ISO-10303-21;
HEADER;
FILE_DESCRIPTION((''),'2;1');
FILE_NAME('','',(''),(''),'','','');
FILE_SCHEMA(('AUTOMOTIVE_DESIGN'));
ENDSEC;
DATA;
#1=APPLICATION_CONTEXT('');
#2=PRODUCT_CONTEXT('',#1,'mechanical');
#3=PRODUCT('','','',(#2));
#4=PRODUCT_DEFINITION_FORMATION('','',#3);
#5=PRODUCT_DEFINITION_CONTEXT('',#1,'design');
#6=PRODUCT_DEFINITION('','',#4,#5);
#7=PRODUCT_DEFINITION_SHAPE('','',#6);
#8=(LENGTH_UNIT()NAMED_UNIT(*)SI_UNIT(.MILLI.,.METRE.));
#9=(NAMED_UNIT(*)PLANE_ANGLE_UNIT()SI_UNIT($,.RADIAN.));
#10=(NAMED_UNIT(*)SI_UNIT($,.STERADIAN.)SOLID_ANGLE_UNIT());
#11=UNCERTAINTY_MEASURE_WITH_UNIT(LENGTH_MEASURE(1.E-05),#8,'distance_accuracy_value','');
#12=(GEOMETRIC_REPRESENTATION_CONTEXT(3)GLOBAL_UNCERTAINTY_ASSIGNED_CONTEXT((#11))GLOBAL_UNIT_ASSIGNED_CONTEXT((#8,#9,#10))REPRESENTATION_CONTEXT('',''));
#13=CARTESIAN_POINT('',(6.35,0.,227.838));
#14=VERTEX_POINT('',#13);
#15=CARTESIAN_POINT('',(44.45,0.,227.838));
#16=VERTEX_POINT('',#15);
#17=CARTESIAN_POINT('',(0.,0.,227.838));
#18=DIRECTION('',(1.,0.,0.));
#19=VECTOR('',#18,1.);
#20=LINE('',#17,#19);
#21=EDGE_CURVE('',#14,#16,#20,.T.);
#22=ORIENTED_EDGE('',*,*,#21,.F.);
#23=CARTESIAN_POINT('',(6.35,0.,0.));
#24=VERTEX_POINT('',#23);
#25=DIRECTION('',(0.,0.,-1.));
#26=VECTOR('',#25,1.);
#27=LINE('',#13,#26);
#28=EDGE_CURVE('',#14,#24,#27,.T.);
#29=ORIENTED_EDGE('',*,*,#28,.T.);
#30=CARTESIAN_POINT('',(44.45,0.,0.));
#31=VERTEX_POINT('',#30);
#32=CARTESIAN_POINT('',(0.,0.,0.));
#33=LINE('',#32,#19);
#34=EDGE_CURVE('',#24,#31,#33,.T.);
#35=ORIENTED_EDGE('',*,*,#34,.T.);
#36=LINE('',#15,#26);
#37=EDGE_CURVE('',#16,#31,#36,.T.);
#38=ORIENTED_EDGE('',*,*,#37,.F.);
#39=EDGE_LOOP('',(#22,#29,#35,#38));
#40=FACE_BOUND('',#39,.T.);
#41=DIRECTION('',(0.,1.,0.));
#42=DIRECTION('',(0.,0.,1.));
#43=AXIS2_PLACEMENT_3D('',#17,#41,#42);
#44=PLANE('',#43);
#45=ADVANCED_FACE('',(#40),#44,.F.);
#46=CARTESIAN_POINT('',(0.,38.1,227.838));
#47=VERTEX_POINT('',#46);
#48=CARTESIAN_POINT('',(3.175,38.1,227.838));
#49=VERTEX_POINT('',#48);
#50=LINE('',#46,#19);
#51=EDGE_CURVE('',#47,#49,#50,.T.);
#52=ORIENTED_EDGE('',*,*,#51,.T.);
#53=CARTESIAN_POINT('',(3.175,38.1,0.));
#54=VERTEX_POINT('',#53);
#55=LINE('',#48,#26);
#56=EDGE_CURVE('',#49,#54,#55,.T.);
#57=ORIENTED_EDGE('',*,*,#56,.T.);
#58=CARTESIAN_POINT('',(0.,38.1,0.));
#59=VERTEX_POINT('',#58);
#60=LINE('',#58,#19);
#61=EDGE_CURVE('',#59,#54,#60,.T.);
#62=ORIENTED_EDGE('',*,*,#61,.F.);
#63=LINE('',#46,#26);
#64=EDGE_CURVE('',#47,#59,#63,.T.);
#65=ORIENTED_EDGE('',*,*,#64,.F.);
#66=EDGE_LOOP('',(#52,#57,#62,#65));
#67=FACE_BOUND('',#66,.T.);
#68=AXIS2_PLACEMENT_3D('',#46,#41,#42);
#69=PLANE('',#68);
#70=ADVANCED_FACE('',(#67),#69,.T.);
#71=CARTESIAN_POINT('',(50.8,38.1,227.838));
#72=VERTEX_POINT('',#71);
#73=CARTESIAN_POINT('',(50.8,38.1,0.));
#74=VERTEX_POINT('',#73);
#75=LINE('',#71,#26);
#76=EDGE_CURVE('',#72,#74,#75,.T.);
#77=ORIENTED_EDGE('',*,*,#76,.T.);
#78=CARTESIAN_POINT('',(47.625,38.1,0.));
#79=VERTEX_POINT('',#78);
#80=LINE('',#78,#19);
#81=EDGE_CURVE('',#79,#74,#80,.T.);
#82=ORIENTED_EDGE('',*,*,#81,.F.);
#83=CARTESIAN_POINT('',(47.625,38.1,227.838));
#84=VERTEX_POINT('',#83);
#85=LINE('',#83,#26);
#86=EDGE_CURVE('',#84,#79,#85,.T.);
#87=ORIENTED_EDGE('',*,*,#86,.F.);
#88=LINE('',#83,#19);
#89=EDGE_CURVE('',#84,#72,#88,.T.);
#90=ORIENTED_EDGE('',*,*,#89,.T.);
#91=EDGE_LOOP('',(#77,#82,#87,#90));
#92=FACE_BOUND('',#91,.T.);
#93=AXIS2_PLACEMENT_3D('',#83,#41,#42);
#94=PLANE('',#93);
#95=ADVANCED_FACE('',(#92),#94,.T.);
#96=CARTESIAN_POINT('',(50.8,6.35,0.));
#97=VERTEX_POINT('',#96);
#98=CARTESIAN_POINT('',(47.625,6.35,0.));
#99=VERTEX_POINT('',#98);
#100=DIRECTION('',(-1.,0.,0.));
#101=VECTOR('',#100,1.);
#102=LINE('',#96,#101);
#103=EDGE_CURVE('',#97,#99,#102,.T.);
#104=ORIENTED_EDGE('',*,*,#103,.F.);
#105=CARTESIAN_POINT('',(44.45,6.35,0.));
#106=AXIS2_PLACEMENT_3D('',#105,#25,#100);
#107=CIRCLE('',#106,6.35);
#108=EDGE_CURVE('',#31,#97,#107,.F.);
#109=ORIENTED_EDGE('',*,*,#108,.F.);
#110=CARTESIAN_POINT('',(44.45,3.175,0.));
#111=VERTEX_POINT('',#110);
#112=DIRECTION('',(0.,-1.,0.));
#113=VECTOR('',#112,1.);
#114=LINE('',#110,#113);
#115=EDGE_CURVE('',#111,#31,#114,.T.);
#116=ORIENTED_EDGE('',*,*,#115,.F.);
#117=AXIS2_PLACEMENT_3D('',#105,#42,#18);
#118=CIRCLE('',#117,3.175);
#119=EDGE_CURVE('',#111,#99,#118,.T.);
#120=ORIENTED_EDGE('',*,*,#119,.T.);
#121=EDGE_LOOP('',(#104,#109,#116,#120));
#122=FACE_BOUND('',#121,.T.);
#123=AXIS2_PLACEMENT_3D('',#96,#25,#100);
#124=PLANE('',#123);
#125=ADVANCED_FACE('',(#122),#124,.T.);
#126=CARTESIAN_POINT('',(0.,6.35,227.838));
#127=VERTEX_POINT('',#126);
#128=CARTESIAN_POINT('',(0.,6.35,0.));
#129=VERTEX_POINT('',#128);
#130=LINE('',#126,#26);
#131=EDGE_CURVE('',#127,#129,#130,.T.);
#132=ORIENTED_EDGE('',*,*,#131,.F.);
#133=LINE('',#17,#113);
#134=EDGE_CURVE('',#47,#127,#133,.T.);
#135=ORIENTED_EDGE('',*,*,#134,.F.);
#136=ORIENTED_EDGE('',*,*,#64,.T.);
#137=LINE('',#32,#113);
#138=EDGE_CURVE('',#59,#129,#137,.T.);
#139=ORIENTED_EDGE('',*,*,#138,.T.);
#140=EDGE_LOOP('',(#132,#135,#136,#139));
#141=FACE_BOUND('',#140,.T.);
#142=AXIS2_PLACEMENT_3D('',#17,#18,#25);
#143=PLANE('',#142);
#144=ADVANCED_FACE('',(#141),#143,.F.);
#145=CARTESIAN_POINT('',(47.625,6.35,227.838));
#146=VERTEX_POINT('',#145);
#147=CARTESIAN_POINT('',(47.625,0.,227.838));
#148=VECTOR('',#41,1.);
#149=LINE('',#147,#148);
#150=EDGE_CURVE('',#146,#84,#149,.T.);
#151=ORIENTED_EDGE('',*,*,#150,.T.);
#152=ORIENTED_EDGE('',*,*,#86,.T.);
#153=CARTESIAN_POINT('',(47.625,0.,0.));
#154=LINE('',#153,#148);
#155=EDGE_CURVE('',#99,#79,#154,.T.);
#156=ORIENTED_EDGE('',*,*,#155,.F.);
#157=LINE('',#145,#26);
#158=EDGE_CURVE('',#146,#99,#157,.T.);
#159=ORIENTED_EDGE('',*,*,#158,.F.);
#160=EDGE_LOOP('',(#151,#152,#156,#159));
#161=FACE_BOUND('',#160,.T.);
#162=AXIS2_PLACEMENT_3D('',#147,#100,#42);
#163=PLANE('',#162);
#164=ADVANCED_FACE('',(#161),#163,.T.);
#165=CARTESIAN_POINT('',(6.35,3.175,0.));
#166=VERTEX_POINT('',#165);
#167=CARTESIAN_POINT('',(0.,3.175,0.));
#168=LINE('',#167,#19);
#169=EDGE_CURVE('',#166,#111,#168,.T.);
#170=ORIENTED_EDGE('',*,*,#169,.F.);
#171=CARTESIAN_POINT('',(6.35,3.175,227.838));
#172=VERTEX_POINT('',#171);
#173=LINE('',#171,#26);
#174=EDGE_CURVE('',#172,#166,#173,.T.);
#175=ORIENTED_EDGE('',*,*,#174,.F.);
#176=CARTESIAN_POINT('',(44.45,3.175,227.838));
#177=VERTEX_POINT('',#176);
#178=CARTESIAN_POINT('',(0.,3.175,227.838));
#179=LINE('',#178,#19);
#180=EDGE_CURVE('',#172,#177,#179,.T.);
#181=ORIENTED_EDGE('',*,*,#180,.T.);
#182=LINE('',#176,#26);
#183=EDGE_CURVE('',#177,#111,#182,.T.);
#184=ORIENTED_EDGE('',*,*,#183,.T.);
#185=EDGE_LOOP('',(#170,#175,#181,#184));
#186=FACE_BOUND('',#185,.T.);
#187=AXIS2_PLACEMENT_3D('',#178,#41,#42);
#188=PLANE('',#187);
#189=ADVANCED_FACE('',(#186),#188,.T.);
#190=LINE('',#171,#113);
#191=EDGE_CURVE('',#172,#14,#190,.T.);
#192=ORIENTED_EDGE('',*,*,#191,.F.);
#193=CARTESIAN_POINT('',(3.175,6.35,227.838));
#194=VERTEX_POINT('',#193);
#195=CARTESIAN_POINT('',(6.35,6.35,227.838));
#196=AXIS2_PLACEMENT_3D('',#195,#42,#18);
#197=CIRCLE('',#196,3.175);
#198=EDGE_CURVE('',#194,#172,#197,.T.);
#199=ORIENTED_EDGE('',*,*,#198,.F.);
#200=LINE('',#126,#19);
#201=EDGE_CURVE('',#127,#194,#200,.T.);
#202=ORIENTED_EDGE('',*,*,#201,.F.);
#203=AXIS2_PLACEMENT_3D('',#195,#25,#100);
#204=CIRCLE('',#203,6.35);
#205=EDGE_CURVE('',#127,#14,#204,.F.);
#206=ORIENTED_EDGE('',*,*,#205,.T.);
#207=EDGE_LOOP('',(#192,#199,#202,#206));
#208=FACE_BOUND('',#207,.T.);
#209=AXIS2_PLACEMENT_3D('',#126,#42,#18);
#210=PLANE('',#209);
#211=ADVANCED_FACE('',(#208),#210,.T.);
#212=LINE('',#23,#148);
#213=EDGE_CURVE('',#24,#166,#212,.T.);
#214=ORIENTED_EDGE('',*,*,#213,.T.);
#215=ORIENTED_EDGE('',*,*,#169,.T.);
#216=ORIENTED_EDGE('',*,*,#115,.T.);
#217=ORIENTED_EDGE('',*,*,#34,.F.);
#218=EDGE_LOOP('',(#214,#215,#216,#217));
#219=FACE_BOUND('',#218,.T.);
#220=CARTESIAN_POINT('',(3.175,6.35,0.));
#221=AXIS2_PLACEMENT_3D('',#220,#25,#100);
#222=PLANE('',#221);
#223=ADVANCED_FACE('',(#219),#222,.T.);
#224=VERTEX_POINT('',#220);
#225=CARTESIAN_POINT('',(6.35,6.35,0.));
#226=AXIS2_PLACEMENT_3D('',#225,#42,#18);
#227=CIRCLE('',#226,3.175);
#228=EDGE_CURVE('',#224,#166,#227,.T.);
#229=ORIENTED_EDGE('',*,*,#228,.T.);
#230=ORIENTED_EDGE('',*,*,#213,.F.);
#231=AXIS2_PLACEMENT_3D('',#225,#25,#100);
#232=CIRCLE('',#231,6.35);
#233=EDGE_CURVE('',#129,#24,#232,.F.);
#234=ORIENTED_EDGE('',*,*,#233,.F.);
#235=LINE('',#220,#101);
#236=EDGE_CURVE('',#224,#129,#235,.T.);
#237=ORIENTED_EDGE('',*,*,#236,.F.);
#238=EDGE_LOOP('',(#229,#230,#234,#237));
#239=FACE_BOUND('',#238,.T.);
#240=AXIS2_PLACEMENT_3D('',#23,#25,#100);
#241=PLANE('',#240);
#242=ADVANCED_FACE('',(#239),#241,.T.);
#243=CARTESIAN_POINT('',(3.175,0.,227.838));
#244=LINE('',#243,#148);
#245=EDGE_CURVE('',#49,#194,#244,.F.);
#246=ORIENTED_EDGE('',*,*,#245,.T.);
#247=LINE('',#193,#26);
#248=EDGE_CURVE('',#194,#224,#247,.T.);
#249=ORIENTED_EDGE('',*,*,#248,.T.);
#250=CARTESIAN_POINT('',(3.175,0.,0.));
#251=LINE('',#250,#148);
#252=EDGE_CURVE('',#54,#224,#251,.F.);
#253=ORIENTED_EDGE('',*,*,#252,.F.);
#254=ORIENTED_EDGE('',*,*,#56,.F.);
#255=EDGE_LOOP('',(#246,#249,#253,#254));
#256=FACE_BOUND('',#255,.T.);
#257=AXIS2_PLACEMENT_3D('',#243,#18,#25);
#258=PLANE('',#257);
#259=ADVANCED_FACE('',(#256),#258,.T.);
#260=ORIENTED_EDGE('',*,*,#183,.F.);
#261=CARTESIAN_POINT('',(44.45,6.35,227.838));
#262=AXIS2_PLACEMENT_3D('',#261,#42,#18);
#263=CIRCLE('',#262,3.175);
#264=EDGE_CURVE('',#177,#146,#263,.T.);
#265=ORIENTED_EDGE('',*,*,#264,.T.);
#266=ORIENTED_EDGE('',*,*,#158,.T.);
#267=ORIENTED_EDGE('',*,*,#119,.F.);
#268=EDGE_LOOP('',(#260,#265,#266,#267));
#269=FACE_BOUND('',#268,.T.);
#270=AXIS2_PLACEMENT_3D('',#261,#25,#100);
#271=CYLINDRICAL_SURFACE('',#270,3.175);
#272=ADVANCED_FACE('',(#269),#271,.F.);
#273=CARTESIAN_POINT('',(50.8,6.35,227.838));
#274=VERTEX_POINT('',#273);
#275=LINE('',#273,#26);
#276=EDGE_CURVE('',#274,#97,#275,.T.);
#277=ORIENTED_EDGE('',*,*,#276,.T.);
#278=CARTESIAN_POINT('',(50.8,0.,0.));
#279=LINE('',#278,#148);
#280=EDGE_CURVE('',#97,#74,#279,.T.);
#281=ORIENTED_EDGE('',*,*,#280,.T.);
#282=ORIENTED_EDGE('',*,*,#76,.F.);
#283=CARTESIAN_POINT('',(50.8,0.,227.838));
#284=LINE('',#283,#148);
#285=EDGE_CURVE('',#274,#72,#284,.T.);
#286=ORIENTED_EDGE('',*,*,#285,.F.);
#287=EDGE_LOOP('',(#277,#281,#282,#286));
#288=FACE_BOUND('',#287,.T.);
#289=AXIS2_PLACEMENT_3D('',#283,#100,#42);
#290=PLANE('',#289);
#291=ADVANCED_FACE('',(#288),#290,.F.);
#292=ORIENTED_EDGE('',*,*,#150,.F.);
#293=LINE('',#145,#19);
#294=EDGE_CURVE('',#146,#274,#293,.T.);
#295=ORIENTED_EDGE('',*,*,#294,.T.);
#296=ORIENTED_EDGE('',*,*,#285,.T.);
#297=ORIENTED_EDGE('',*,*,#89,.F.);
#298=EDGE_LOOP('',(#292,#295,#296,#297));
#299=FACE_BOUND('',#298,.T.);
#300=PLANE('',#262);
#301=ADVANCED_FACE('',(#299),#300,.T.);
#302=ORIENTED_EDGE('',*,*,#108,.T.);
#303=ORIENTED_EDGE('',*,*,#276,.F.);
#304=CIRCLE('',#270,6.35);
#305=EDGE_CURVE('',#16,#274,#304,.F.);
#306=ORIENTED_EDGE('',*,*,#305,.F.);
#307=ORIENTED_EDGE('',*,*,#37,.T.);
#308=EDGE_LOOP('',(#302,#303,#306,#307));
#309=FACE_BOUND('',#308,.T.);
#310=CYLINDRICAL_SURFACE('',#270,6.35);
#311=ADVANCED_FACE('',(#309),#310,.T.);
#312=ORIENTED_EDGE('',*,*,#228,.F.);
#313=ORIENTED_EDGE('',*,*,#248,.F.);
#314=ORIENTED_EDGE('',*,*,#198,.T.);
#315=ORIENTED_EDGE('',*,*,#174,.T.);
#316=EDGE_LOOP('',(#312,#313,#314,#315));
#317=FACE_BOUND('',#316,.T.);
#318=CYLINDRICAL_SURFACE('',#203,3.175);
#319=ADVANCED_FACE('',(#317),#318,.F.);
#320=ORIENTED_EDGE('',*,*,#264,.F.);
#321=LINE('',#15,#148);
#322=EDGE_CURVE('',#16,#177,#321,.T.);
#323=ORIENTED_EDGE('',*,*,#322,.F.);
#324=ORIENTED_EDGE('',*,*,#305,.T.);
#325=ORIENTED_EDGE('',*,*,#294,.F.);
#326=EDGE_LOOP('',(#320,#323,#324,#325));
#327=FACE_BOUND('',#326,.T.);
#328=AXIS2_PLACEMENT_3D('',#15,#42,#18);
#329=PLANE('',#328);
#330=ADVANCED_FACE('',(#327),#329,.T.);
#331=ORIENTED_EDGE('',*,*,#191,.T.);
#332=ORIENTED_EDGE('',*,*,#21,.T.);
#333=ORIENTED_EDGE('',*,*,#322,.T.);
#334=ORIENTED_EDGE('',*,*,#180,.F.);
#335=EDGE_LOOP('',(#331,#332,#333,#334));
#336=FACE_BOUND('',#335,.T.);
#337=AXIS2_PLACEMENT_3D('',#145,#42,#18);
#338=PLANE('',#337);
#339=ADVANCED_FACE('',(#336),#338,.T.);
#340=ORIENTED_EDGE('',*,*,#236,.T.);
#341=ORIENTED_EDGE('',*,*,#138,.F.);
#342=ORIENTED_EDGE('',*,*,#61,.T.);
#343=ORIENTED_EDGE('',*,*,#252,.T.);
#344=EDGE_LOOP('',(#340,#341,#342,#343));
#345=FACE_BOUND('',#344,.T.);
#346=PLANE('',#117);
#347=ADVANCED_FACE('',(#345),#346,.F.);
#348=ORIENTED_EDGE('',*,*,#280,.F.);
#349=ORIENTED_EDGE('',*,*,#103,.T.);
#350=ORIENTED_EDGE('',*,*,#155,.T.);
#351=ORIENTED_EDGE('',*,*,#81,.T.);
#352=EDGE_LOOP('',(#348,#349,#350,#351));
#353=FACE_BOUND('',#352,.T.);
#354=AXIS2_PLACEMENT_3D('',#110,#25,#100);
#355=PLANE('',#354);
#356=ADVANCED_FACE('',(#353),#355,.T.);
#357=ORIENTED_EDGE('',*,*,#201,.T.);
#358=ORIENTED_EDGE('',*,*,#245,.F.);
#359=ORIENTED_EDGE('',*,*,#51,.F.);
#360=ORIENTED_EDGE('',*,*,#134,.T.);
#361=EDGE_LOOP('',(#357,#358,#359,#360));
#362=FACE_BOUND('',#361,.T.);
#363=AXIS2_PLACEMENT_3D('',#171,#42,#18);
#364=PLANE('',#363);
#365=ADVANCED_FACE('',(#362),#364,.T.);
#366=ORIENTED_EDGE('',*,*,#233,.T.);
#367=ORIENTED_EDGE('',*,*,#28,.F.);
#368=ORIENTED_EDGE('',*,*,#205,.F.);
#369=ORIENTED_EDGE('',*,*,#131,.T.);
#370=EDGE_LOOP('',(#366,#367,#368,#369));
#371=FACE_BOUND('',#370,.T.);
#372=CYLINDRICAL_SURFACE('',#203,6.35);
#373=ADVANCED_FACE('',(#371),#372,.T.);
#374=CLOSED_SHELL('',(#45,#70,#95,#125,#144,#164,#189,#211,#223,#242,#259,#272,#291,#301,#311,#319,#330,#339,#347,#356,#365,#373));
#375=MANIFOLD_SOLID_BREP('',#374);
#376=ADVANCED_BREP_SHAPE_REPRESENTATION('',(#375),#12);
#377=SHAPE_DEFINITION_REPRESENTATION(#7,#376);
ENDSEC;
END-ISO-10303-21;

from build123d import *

# Parameters (mm, degrees)
BASE_FLANGE1_DEPTH = 227.838


# Sheet-metal steps are written as plain solids
with BuildPart() as part:
    # Base-Flange1: sheet metal written as solids
    # Sketch1 → Base-Flange1 (new body)
    with BuildSketch(Plane.XY):
        with BuildLine():
            Line((50.8, 38.1), (50.8, 6.35))
            ThreePointArc((50.8, 6.35), (48.940128061, 1.859871939), (44.45, 0))
            Line((44.45, 0), (6.35, 0))
            ThreePointArc((6.35, 0), (1.859871939, 1.859871939), (0, 6.35))
            Line((0, 6.35), (0, 38.1))
            Line((0, 38.1), (3.175, 38.1))
            Line((3.175, 38.1), (3.175, 6.35))
            ThreePointArc((3.175, 6.35), (4.10493597, 4.10493597), (6.35, 3.175))
            Line((6.35, 3.175), (44.45, 3.175))
            ThreePointArc((44.45, 3.175), (46.69506403, 4.10493597), (47.625, 6.35))
            Line((47.625, 6.35), (47.625, 38.1))
            Line((47.625, 38.1), (50.8, 38.1))
        make_face()
    extrude(amount=BASE_FLANGE1_DEPTH)


solid = part.part
